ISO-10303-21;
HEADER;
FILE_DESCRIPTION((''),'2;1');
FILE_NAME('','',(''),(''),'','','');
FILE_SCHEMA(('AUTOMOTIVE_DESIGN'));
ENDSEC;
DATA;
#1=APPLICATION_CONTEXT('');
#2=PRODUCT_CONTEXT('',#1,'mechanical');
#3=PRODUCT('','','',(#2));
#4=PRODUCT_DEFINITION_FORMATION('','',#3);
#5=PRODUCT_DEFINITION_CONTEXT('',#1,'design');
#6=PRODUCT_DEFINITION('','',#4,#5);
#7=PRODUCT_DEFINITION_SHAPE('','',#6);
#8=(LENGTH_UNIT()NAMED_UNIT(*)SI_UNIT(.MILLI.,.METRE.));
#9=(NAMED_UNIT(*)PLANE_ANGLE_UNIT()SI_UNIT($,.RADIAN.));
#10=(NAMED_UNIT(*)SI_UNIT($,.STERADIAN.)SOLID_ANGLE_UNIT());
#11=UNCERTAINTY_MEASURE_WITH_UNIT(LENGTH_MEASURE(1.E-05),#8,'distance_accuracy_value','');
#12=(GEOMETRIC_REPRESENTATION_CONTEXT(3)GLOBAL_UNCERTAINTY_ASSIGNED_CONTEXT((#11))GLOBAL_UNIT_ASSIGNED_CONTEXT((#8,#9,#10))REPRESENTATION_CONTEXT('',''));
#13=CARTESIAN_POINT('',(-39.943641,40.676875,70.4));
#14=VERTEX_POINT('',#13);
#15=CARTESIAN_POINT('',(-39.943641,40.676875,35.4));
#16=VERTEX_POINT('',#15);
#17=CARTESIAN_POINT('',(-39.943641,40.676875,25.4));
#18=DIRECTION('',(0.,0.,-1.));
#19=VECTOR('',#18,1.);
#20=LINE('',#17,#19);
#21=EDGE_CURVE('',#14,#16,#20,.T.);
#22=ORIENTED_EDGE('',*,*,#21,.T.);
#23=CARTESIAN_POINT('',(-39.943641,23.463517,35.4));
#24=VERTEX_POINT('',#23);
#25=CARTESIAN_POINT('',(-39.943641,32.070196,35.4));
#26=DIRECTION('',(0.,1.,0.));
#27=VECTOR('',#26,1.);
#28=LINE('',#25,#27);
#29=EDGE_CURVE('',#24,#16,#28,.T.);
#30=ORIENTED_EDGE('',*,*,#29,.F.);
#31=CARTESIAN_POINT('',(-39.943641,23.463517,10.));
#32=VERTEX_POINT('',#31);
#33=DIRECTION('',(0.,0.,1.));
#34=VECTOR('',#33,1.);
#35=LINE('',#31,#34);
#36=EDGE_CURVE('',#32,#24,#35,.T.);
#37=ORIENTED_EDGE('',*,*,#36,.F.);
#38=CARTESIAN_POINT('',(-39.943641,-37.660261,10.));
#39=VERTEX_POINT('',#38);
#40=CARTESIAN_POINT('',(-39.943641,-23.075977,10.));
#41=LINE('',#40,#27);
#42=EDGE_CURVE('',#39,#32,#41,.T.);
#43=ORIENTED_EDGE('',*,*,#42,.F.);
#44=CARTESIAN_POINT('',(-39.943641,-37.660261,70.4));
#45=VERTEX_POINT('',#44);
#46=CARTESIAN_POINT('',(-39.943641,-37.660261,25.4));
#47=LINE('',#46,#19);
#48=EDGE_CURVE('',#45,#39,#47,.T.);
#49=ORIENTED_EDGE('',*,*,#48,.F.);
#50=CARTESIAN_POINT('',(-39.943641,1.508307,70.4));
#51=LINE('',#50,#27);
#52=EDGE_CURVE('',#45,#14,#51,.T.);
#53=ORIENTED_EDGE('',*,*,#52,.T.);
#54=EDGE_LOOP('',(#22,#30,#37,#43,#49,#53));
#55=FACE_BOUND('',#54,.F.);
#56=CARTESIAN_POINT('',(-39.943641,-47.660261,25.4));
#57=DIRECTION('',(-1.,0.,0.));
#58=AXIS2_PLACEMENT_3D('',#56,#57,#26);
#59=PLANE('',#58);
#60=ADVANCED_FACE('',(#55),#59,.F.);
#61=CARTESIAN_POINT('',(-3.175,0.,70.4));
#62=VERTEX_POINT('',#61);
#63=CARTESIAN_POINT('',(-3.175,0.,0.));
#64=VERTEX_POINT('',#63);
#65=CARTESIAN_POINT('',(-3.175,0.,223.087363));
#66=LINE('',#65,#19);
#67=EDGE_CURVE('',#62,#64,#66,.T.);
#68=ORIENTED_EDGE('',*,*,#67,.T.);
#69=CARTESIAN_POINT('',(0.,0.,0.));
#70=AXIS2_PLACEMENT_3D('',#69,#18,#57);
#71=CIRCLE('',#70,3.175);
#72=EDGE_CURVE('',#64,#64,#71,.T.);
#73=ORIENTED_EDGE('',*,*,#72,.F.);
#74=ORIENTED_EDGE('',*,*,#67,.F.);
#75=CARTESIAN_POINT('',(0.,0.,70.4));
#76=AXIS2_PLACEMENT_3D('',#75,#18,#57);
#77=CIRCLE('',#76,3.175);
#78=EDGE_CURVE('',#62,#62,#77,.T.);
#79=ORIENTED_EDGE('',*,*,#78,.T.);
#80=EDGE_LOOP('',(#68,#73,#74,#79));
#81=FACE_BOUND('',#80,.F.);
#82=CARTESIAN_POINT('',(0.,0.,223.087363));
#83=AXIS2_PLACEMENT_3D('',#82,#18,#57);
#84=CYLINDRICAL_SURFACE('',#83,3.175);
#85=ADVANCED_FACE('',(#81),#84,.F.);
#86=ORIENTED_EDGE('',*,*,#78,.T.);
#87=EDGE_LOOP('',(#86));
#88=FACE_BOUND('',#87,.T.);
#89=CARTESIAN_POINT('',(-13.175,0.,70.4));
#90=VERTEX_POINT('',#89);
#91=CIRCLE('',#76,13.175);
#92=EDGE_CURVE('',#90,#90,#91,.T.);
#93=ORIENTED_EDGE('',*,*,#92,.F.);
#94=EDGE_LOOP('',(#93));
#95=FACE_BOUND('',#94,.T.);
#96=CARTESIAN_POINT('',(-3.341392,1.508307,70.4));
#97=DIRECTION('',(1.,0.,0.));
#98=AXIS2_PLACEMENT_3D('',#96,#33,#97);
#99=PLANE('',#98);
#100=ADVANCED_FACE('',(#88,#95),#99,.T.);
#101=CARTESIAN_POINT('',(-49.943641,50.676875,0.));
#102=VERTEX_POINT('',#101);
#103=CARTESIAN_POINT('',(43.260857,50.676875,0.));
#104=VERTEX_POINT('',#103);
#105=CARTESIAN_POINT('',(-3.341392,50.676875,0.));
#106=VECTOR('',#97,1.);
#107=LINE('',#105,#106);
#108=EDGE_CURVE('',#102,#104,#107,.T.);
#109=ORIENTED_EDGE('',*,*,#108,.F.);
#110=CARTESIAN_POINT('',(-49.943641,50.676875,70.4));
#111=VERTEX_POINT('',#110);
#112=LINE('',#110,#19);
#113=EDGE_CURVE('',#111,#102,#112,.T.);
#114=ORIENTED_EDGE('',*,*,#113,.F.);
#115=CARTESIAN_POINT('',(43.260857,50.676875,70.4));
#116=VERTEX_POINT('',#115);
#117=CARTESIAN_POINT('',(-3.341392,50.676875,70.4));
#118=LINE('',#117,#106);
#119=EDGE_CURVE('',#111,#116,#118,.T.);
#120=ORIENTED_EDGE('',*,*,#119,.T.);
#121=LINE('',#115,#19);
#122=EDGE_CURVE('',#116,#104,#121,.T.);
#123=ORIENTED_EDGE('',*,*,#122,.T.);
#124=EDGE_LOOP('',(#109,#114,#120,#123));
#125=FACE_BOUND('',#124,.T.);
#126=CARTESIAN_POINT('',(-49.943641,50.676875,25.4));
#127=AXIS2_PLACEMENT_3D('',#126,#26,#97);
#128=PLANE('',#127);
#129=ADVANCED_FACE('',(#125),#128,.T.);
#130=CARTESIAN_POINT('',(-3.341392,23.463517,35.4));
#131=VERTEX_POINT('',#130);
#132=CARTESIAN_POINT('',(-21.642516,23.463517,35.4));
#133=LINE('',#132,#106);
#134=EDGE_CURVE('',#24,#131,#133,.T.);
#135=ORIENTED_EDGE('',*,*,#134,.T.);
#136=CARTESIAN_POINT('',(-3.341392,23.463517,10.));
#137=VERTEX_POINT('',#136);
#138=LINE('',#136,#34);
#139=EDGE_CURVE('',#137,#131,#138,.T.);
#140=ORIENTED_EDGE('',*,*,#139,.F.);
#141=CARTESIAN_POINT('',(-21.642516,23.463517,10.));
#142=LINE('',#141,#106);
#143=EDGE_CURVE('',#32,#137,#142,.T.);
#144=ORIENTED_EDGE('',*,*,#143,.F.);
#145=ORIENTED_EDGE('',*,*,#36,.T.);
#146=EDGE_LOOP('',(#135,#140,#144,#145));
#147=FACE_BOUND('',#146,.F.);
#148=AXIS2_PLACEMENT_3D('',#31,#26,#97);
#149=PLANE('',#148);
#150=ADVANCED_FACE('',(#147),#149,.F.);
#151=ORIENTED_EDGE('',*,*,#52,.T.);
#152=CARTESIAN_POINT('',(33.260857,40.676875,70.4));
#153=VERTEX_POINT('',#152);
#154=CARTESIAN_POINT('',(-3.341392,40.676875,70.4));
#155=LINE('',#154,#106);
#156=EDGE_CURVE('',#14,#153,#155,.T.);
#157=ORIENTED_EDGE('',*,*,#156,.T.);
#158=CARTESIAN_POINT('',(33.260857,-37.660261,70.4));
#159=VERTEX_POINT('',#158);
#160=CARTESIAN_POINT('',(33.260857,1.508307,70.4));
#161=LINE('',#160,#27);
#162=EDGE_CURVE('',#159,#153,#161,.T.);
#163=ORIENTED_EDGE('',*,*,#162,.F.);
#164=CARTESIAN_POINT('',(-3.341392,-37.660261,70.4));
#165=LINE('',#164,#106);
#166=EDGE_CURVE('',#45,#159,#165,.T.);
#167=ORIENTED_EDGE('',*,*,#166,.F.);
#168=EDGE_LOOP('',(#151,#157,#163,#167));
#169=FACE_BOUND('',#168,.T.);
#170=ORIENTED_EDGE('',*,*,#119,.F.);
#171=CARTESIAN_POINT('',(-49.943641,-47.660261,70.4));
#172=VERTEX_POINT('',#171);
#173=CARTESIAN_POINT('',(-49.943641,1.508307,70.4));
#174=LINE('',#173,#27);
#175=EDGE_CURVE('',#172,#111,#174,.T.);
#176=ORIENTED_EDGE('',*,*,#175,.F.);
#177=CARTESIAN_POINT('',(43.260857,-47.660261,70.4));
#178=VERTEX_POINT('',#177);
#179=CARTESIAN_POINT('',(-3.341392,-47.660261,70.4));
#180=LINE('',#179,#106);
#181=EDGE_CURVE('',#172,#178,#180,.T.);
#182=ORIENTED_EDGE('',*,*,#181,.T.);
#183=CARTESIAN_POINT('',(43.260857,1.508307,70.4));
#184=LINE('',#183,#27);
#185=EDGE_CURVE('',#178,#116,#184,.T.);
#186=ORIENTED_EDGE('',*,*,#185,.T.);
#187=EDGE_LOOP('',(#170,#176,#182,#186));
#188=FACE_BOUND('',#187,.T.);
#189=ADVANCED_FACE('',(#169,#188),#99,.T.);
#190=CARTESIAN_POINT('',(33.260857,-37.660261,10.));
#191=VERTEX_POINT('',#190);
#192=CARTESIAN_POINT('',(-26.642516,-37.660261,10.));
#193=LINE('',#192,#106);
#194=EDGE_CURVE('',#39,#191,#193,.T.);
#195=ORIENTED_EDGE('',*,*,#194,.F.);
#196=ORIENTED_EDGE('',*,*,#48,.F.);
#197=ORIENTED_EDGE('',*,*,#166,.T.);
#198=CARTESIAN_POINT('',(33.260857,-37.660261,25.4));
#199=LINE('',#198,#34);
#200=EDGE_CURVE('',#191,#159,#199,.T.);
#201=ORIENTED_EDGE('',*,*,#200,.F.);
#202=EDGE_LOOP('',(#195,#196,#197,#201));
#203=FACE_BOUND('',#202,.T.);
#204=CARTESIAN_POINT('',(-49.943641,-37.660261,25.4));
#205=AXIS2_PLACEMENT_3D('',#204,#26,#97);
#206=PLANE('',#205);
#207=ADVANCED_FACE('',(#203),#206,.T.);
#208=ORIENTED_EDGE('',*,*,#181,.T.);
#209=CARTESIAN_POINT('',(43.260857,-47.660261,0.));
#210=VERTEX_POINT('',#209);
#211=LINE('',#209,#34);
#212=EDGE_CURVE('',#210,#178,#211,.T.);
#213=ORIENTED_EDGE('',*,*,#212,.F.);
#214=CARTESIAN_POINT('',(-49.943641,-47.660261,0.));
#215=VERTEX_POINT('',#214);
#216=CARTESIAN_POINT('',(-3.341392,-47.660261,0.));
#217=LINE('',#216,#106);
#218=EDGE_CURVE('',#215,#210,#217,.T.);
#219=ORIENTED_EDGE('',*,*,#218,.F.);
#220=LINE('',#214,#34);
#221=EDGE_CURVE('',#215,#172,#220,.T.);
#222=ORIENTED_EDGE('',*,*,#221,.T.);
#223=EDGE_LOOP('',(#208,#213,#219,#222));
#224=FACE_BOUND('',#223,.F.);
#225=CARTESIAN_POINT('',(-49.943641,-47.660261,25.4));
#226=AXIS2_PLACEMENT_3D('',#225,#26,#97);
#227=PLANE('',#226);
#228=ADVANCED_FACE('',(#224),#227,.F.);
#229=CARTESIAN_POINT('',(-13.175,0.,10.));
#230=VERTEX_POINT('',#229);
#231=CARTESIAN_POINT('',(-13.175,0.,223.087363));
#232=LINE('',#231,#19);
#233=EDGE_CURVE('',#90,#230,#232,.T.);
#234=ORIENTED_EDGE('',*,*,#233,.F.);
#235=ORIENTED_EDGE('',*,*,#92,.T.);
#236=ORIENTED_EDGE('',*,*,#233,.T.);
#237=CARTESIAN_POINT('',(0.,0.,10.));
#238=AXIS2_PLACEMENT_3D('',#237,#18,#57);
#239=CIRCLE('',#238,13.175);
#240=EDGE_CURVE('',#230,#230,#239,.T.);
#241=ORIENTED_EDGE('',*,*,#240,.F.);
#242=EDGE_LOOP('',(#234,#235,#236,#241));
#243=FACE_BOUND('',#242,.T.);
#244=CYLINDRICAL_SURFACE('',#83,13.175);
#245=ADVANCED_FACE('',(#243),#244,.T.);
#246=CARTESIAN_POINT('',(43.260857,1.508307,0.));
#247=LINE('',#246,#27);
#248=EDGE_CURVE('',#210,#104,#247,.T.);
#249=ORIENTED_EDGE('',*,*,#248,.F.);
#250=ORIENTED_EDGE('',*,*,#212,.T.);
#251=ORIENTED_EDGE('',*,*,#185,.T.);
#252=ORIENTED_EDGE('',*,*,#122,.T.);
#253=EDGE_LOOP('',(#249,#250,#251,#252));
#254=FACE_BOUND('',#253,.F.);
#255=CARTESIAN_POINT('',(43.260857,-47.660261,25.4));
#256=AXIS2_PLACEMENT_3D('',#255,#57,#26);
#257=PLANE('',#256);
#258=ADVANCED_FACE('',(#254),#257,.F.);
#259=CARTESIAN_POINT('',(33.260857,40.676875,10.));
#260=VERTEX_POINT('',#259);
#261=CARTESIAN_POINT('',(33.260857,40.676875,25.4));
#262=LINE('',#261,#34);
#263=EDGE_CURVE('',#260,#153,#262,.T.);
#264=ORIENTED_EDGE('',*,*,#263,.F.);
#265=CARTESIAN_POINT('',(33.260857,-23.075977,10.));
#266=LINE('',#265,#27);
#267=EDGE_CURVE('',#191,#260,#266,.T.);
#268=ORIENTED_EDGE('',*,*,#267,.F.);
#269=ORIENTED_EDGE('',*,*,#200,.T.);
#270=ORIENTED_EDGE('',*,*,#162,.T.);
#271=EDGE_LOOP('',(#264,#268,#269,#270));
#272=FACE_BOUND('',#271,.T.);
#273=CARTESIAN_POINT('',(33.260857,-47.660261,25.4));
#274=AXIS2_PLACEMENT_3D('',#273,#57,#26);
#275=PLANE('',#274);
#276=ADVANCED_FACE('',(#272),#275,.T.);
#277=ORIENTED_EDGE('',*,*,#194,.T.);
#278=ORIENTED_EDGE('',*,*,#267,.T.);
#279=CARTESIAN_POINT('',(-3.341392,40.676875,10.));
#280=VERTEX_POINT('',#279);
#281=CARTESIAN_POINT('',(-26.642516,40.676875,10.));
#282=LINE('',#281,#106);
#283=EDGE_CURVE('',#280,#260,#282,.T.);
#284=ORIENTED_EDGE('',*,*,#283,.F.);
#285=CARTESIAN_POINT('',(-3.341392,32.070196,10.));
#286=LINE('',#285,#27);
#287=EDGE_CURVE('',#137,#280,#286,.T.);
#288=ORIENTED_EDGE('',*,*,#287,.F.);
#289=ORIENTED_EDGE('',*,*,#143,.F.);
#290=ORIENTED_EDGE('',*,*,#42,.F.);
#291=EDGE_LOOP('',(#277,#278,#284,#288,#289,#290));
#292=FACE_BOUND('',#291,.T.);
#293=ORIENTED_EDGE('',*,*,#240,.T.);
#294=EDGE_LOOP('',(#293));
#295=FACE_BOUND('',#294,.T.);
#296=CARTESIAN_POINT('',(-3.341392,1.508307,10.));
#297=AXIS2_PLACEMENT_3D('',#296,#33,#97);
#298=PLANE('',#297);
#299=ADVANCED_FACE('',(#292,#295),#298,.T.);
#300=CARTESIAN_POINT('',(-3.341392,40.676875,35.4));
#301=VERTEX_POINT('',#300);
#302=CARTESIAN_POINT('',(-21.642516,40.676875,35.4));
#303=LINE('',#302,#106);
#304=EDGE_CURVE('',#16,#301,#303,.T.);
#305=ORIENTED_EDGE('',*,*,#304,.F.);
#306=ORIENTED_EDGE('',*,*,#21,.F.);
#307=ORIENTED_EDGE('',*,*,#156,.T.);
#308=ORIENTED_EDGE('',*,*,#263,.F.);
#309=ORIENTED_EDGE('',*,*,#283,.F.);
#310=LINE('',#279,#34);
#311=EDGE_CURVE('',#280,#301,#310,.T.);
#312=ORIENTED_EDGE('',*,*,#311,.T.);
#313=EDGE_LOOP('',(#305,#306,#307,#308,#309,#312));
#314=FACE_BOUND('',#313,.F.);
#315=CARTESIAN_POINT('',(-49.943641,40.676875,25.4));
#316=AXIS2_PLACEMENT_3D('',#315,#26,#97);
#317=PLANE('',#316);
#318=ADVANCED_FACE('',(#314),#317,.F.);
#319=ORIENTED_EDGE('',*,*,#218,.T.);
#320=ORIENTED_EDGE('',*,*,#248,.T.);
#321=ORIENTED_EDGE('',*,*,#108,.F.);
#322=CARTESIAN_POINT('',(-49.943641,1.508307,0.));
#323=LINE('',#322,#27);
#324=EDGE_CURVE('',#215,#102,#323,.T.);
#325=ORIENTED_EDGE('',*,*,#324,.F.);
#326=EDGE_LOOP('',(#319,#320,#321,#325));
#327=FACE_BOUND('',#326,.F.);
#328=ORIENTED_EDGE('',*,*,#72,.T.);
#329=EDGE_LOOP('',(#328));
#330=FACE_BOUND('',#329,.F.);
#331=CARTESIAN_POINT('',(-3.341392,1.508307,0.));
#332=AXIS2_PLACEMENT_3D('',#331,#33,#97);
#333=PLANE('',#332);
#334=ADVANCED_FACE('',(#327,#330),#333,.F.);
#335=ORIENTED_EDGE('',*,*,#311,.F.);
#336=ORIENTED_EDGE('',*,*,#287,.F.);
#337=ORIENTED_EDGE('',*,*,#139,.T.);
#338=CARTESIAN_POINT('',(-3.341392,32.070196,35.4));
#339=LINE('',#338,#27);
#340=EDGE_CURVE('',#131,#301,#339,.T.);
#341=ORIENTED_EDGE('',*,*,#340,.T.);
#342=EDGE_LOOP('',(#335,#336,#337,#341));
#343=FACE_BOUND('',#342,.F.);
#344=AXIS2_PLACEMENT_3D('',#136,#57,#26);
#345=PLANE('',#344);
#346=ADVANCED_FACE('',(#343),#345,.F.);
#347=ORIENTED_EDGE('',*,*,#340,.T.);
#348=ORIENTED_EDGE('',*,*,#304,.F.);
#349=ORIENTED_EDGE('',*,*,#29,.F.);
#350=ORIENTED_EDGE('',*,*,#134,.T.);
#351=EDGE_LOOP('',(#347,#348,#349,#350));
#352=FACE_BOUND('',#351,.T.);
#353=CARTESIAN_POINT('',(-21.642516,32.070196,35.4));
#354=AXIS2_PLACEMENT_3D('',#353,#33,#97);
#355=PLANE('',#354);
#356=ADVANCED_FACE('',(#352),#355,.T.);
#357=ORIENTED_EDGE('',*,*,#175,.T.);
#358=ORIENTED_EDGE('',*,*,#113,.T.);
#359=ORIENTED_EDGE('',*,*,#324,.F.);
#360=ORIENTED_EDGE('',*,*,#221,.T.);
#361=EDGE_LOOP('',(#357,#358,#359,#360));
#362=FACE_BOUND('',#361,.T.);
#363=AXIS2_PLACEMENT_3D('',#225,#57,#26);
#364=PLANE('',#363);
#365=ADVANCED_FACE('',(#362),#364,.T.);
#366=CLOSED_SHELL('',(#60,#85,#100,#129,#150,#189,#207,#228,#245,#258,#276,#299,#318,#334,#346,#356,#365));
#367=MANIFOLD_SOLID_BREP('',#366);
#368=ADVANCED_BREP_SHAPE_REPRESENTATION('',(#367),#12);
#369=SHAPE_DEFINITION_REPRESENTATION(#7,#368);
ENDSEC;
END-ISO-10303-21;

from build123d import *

# Parameters (mm, degrees)
F0_W     = 93.204498291
F0_H     = 98.337136209
F1_DEPTH = 25.4
F2_DEPTH = 45
F4_D     = 6.35
F7_T     = -10
F8_W     = 36.6022491455
F8_H     = 17.213357389
F9_DEPTH = 25.4


# Not quite as in the source:
# - the program builds the solid bodies; features that only make, move or delete a surface that nothing else refers to are left out


with BuildPart() as f1:
    # F0 (on Top) → F1 (new body)
    with BuildSketch(Plane.XY):
        with Locations((-3.3413916826, 1.5083067119)):
            Rectangle(F0_W, F0_H)
    extrude(amount=F1_DEPTH)

    # F2 (add): a face of the model
    f2_faces = [f1.faces().sort_by_distance(p)[0] for p in [
        (-3.3413916826, 1.5083067119, 25.4),
    ]]
    extrude(f2_faces, amount=F2_DEPTH)

    # F4 (through all)
    with Locations(Plane.XY.offset(70.4)):
        with Locations((0, 0)):
            Hole(F4_D / 2)

    # F7
    f7_openings = [f1.faces().sort_by_distance(p)[0] for p in [
        (-3.352977, 1.513536, 70.4),
    ]]
    offset(amount=F7_T, openings=f7_openings)

    # F8 (on face) → F9 (join)
    with BuildSketch(Plane.XY.offset(10)):
        with Locations((-21.6425162554, 32.0701961219)):
            Rectangle(F8_W, F8_H)
    extrude(amount=F9_DEPTH)


solid = f1.part
